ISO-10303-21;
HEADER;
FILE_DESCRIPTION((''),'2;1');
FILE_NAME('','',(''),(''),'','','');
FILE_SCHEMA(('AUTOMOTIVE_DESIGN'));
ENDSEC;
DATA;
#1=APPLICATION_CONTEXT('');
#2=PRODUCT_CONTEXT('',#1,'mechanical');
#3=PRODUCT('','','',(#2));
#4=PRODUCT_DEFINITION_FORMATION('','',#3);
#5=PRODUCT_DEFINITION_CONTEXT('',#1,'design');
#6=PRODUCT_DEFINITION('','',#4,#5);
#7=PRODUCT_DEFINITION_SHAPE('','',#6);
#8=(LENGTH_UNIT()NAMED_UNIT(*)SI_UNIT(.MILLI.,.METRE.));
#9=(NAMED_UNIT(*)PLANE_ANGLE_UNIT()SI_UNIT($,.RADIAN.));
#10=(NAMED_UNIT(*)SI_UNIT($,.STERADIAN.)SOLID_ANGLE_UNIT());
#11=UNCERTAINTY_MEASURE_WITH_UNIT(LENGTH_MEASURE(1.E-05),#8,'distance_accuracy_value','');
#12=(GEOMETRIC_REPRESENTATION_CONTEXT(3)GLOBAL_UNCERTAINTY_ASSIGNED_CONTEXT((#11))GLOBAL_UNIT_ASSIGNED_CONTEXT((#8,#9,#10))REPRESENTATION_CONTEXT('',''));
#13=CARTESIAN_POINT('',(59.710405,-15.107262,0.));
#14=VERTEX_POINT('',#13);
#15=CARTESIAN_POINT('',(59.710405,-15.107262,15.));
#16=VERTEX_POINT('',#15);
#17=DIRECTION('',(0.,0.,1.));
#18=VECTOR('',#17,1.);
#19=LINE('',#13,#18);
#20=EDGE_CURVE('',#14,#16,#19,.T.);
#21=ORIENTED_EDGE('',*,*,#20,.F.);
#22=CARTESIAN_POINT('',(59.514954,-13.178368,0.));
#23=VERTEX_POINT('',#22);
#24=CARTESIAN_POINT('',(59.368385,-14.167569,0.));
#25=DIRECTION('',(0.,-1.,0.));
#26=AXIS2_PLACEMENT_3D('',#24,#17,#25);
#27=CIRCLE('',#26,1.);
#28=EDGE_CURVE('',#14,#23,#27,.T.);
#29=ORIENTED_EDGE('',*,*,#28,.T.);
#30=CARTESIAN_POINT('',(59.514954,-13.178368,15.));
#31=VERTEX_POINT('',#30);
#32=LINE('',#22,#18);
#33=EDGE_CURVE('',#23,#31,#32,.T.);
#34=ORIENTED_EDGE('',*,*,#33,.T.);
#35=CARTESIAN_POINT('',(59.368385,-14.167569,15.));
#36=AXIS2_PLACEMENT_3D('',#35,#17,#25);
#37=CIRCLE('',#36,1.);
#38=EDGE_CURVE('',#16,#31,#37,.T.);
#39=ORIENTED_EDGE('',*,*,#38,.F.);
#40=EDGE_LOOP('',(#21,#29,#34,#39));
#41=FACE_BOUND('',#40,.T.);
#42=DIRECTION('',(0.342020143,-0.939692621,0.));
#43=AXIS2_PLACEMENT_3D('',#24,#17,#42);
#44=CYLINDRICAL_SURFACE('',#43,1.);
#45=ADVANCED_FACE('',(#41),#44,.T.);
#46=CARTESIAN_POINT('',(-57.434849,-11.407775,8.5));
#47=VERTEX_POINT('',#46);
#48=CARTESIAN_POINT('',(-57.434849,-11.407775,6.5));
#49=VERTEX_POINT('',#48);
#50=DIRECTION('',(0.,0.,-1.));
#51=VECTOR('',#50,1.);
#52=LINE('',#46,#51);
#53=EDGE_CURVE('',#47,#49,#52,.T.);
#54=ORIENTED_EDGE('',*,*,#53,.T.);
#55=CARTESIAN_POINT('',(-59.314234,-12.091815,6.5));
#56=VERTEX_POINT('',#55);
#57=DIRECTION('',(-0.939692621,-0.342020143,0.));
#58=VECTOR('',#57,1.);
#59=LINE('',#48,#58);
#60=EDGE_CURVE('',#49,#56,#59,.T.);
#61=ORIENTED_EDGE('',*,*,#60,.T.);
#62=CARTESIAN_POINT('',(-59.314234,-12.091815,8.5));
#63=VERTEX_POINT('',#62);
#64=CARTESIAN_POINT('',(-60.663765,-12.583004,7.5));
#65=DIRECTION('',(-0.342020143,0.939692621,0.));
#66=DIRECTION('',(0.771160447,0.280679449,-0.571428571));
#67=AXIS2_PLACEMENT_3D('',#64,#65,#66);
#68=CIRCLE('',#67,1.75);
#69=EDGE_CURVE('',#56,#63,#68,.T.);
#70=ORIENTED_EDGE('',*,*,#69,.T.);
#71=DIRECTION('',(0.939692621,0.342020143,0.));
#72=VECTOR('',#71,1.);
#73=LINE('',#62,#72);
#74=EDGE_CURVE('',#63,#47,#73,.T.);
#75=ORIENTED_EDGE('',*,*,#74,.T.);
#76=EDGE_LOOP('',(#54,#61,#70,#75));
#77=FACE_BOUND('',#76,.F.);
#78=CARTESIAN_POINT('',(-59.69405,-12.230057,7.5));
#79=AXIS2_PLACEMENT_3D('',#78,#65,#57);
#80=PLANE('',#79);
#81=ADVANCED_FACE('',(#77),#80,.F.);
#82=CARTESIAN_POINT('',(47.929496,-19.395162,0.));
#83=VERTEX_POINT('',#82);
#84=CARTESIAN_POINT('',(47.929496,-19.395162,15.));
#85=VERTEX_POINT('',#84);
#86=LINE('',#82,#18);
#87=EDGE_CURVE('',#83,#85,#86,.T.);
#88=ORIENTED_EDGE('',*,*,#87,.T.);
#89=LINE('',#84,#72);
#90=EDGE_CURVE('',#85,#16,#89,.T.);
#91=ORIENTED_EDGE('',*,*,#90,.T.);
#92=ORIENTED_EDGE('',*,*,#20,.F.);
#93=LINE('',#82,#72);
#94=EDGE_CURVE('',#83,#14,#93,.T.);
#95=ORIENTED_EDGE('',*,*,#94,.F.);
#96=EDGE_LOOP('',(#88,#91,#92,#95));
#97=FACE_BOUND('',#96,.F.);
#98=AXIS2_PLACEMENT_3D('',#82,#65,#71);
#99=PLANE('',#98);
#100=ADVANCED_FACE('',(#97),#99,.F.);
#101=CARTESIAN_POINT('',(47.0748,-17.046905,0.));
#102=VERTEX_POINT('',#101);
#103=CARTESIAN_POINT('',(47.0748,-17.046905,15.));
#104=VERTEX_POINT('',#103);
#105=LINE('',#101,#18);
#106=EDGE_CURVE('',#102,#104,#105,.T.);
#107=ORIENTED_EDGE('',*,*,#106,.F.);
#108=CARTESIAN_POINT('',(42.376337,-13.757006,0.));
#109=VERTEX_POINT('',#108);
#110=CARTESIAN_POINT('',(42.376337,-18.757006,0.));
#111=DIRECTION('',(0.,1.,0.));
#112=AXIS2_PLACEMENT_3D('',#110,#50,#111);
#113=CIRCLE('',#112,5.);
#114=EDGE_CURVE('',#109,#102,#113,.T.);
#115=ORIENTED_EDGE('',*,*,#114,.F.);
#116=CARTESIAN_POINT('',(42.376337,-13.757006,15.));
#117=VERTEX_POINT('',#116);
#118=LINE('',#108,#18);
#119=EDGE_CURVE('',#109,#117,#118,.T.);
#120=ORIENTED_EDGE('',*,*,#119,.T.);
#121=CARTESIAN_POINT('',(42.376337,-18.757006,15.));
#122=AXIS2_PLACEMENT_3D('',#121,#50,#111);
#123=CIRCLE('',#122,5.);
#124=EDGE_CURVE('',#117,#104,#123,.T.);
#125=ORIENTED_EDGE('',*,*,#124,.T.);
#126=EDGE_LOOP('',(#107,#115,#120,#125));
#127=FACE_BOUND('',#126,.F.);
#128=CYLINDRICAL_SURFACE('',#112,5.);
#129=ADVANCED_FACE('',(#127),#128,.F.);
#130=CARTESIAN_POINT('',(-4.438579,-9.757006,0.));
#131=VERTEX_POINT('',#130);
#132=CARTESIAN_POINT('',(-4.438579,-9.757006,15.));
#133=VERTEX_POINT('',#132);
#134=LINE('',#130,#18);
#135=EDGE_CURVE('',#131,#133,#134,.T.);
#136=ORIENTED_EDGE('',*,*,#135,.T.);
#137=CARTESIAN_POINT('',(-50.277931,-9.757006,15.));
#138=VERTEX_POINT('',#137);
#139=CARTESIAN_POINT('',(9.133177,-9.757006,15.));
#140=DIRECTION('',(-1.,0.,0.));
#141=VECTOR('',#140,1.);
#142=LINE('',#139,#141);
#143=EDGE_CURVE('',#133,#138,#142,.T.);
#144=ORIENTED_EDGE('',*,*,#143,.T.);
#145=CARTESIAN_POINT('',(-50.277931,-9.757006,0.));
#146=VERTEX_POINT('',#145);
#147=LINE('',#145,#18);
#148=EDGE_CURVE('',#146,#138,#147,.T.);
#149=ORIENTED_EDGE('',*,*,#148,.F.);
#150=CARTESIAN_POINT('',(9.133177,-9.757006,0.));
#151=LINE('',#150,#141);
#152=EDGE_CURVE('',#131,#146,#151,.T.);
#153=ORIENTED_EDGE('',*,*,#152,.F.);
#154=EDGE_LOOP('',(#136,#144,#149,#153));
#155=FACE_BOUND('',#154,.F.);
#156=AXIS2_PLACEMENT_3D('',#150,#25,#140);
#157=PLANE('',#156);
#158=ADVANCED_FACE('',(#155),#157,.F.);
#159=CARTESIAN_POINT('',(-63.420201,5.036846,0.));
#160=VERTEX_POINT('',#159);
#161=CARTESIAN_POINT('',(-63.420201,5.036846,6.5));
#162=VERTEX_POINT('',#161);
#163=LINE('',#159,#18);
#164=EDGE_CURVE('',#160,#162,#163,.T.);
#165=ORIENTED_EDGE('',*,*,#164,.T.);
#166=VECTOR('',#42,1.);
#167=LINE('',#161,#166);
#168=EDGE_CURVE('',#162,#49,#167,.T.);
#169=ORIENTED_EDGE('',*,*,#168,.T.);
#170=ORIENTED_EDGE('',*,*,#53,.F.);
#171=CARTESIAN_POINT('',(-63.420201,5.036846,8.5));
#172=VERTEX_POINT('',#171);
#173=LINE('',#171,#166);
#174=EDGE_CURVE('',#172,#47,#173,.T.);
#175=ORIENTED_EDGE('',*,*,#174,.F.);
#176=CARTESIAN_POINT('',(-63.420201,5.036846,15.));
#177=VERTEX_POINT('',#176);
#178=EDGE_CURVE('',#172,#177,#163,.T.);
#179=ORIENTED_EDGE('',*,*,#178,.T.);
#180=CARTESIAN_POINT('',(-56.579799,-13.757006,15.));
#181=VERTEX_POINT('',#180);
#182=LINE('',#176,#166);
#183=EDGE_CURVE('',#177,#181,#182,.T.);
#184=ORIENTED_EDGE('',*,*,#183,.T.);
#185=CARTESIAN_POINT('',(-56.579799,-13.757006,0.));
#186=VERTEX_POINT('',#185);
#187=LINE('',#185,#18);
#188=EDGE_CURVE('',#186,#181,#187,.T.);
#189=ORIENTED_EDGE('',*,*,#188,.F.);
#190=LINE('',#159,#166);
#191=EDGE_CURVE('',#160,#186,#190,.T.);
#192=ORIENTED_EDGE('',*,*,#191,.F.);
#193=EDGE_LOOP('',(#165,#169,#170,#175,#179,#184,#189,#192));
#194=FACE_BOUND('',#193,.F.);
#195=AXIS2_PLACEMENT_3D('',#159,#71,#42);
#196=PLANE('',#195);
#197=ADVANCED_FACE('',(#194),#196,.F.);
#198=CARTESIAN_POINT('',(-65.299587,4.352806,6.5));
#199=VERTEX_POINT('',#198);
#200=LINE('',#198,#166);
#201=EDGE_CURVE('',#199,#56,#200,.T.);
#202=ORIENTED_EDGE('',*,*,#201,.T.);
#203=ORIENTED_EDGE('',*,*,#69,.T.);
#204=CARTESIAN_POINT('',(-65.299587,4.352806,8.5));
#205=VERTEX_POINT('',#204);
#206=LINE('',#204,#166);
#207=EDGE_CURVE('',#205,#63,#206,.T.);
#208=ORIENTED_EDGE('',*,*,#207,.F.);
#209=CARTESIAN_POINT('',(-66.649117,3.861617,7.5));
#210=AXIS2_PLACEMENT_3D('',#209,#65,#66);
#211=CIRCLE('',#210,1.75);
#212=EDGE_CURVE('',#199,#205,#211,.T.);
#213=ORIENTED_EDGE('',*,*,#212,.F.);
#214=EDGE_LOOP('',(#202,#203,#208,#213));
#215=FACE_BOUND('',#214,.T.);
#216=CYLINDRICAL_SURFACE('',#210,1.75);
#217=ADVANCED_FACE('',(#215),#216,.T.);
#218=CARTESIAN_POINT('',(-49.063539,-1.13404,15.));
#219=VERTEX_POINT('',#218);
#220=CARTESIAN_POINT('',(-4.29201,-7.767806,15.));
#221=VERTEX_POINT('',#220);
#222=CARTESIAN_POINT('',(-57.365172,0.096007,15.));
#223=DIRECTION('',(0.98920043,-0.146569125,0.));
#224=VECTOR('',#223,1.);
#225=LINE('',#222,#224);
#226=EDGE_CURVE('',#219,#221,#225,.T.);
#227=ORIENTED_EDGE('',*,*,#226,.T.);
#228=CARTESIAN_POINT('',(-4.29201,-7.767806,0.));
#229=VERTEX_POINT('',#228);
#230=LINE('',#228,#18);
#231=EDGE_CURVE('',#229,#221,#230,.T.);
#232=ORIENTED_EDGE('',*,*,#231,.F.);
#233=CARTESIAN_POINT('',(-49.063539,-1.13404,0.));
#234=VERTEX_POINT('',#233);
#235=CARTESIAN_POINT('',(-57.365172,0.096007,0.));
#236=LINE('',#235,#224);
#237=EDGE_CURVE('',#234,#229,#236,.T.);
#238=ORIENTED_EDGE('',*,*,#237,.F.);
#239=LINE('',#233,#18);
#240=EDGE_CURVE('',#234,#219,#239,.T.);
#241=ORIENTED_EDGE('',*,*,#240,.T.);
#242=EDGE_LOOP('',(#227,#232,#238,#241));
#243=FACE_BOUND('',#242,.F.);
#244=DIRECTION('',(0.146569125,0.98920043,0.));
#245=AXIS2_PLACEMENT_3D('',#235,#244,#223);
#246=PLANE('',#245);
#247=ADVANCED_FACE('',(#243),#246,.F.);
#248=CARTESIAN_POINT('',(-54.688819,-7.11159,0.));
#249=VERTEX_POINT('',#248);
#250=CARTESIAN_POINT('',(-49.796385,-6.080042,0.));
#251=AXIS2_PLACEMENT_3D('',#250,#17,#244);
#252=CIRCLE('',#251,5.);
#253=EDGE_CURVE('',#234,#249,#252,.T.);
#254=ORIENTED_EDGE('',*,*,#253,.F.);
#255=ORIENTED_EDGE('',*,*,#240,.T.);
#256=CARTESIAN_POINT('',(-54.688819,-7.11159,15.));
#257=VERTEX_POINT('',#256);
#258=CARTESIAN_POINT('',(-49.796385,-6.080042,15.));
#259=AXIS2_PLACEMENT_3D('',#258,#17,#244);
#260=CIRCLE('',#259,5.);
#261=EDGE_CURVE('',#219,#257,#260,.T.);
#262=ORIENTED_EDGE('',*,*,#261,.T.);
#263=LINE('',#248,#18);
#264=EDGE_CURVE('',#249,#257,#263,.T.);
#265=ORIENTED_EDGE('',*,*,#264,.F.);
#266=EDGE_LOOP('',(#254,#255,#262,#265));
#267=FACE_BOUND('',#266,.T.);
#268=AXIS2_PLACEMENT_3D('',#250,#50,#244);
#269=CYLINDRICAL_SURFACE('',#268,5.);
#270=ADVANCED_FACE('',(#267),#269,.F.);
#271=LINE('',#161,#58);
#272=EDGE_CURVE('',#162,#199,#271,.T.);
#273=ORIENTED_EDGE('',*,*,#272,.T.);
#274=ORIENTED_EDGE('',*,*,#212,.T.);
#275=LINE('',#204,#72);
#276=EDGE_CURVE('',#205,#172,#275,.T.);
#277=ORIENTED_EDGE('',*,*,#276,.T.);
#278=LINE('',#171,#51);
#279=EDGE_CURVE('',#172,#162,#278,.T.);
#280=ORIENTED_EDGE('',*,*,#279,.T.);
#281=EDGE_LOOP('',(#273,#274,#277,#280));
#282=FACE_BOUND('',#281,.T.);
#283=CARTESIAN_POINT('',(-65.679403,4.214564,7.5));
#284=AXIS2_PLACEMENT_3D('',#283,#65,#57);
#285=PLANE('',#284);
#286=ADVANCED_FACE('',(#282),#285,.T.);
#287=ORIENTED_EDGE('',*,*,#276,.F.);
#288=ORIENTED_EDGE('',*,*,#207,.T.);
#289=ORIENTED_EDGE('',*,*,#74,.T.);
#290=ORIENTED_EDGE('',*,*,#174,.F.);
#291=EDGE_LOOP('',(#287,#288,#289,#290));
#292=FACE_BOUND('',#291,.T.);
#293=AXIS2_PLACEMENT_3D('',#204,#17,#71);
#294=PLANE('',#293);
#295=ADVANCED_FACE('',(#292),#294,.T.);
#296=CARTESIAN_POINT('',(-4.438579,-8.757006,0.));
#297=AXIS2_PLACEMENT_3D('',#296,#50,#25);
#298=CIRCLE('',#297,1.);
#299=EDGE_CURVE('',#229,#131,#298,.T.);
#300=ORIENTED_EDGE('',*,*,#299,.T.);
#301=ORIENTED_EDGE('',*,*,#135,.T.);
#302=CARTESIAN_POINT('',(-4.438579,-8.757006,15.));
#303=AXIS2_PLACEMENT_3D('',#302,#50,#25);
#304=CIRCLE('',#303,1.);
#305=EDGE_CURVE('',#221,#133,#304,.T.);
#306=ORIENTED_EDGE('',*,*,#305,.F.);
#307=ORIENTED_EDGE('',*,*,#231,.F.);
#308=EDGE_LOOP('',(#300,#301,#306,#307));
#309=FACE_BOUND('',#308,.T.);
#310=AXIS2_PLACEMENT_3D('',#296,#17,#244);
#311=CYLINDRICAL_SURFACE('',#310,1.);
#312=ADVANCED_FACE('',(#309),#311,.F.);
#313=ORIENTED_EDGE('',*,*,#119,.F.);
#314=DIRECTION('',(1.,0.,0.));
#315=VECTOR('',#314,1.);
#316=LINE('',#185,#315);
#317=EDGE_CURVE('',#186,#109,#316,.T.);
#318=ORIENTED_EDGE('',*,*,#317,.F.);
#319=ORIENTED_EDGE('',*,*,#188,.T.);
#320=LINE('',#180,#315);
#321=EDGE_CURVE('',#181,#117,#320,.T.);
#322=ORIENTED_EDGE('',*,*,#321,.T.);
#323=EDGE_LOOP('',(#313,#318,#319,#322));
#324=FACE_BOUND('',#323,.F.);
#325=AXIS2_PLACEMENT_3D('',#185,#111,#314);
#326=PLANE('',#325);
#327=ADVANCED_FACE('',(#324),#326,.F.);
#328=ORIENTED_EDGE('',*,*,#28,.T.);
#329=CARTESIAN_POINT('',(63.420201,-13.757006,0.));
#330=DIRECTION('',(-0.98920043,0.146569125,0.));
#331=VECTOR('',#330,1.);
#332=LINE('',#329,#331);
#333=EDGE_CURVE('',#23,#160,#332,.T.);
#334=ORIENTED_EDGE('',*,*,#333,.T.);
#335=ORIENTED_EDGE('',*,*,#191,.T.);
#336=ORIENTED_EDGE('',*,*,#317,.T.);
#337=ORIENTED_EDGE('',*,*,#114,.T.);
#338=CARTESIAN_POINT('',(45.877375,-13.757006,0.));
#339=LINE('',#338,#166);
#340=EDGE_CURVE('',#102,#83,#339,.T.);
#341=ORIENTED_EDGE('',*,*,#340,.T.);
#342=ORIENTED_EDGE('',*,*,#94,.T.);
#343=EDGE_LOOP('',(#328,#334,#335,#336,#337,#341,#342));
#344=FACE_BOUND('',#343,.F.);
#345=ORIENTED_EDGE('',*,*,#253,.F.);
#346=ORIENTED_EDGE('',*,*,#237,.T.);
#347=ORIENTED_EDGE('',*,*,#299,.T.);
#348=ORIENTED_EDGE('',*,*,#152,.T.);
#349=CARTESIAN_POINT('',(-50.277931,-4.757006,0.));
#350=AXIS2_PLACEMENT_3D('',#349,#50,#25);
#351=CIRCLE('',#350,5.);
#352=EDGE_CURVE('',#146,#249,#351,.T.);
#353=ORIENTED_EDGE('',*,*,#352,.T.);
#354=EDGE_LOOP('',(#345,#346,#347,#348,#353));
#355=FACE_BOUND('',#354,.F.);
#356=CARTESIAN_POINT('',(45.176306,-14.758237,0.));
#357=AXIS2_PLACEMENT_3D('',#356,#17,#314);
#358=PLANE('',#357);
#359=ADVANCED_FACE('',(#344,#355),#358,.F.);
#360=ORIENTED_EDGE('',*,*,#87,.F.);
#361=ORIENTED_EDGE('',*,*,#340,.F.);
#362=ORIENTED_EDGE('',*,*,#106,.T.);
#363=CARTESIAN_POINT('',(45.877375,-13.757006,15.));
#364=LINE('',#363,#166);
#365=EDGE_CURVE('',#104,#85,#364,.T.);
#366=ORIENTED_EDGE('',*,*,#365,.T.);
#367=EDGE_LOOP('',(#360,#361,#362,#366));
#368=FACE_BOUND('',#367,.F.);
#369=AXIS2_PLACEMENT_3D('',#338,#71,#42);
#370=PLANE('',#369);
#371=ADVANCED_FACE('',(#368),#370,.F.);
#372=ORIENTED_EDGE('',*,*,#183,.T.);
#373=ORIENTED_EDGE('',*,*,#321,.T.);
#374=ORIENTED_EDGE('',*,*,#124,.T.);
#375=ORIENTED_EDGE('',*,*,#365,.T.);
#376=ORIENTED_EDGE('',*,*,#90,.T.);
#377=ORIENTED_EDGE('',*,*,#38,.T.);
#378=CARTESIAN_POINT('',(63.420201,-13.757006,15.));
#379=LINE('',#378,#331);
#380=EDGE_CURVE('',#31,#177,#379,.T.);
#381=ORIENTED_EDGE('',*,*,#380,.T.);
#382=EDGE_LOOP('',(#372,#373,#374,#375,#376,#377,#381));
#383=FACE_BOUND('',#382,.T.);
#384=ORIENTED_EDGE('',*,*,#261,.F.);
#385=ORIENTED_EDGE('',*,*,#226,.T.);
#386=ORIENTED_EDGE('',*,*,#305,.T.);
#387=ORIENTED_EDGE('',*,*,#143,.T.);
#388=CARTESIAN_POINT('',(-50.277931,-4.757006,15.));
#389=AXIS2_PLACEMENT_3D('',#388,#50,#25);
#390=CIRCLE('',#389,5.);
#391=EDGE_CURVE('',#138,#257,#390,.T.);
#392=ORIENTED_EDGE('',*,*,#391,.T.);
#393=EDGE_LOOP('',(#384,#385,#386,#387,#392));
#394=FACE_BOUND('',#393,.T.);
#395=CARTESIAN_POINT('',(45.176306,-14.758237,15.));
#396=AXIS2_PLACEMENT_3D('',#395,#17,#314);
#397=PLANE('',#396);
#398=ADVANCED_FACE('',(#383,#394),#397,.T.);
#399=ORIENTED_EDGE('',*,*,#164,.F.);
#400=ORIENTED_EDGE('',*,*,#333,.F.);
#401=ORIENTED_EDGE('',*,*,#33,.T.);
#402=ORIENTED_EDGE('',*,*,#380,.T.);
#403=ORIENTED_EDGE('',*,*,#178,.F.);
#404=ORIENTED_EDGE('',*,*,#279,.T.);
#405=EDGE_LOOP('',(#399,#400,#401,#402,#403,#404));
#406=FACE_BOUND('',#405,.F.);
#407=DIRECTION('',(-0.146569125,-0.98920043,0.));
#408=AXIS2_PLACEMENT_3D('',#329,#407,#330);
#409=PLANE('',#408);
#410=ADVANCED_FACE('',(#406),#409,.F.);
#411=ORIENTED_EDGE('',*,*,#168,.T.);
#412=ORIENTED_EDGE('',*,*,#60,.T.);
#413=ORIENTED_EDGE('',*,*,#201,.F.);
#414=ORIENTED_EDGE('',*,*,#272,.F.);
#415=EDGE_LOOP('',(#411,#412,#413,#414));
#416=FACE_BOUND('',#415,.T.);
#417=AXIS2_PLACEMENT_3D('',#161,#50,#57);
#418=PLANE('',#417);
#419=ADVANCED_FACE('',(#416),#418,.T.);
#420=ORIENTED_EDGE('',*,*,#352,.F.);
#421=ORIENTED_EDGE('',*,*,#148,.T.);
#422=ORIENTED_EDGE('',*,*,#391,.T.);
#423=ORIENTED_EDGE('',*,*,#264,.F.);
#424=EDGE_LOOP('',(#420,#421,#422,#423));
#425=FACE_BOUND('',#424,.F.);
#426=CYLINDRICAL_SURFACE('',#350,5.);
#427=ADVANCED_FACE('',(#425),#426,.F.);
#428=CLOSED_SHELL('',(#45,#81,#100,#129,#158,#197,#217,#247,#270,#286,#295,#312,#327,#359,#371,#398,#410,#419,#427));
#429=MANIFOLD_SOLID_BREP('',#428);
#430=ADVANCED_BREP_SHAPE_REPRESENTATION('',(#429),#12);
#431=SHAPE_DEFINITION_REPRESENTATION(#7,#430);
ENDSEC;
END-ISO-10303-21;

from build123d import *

# Parameters (mm, degrees)
F1_DEPTH    = 15
F2_T1_DEPTH = 15
F3_R        = 1
F6_DEPTH    = 17.5


# Not quite as in the source:
# - a fillet or chamfer that OpenCascade refuses, or shapes differently, is made with other operations: its cross-section is extruded or revolved along the edge and cut away or added


with BuildPart() as f1:
    # F0 (on Top) → F1 (new body)
    with BuildSketch(Plane.XY):
        Polygon((-63.4202014333, 5.036846236), (-56.5797985667, -13.7570061798), (45.8773750323, -13.7570061798), (63.4202014333, -13.7570061798), align=None)
        Polygon((-57.3651718984, 0.0960069154), (9.1331767526, -9.7570061798), (-53.7789684139, -9.7570061798), align=None, mode=Mode.SUBTRACT)
        Polygon((63.4202014333, -13.7570061798), (45.8773750323, -13.7570061798), (47.9294958922, -19.3951619045), align=None)
    extrude(amount=F1_DEPTH)

    # F2: fillet of radius 5 on 3 edges, made by hand

    # F2_s2 → F2_t1 (join)
    with BuildSketch(Plane.XY):
        with BuildLine():
            ThreePointArc((42.3763373412, -13.7570061798), (45.244219523, -14.6612459583), (47.0748004452, -17.0469054631))
            Line((47.0748004452, -17.0469054631), (45.8773750323, -13.7570061798))
            Line((45.8773750323, -13.7570061798), (42.3763373412, -13.7570061798))
        make_face()
        with BuildLine():
            ThreePointArc((-50.2779307229, -9.7570061798), (-53.1458129046, -8.8527664012), (-54.9763938268, -6.4671068964))
            Line((-54.9763938268, -6.4671068964), (-53.7789684139, -9.7570061798))
            Line((-53.7789684139, -9.7570061798), (-50.2779307229, -9.7570061798))
        make_face()
        with BuildLine():
            ThreePointArc((-49.0635393533, -1.1340400833), (-53.6703308808, -2.9189438256), (-54.4948480837, -7.790142952))
            Line((-54.4948480837, -7.790142952), (-57.3651718984, 0.0960069154))
            Line((-57.3651718984, 0.0960069154), (-49.0635393533, -1.1340400833))
        make_face()
    extrude(amount=F2_T1_DEPTH)

    # F3
    f3_edges = [f1.edges().sort_by_distance(p)[0] for p in [
        (63.420201, -13.757006, 7.5),
        (9.133177, -9.757006, 7.5),
    ]]
    fillet(f3_edges, radius=F3_R)

    # F5 (on face) → F6 (join)
    with BuildSketch(Plane(origin=(-9.0375654481, 24.8305069955, 0), x_dir=(-0.9396926208, -0.3420201433, 0), z_dir=(-0.3420201433, 0.9396926208, 0))):
        with BuildLine():
            Line((57.8727924241, 8.5), (57.8727924241, 6.5))
            Line((57.8727924241, 6.5), (59.8727924241, 6.5))
            ThreePointArc((59.8727924241, 6.5), (63.0589330857, 7.5), (59.8727924241, 8.5))
            Line((59.8727924241, 8.5), (57.8727924241, 8.5))
        make_face()
    extrude(amount=-F6_DEPTH)


solid = f1.part
